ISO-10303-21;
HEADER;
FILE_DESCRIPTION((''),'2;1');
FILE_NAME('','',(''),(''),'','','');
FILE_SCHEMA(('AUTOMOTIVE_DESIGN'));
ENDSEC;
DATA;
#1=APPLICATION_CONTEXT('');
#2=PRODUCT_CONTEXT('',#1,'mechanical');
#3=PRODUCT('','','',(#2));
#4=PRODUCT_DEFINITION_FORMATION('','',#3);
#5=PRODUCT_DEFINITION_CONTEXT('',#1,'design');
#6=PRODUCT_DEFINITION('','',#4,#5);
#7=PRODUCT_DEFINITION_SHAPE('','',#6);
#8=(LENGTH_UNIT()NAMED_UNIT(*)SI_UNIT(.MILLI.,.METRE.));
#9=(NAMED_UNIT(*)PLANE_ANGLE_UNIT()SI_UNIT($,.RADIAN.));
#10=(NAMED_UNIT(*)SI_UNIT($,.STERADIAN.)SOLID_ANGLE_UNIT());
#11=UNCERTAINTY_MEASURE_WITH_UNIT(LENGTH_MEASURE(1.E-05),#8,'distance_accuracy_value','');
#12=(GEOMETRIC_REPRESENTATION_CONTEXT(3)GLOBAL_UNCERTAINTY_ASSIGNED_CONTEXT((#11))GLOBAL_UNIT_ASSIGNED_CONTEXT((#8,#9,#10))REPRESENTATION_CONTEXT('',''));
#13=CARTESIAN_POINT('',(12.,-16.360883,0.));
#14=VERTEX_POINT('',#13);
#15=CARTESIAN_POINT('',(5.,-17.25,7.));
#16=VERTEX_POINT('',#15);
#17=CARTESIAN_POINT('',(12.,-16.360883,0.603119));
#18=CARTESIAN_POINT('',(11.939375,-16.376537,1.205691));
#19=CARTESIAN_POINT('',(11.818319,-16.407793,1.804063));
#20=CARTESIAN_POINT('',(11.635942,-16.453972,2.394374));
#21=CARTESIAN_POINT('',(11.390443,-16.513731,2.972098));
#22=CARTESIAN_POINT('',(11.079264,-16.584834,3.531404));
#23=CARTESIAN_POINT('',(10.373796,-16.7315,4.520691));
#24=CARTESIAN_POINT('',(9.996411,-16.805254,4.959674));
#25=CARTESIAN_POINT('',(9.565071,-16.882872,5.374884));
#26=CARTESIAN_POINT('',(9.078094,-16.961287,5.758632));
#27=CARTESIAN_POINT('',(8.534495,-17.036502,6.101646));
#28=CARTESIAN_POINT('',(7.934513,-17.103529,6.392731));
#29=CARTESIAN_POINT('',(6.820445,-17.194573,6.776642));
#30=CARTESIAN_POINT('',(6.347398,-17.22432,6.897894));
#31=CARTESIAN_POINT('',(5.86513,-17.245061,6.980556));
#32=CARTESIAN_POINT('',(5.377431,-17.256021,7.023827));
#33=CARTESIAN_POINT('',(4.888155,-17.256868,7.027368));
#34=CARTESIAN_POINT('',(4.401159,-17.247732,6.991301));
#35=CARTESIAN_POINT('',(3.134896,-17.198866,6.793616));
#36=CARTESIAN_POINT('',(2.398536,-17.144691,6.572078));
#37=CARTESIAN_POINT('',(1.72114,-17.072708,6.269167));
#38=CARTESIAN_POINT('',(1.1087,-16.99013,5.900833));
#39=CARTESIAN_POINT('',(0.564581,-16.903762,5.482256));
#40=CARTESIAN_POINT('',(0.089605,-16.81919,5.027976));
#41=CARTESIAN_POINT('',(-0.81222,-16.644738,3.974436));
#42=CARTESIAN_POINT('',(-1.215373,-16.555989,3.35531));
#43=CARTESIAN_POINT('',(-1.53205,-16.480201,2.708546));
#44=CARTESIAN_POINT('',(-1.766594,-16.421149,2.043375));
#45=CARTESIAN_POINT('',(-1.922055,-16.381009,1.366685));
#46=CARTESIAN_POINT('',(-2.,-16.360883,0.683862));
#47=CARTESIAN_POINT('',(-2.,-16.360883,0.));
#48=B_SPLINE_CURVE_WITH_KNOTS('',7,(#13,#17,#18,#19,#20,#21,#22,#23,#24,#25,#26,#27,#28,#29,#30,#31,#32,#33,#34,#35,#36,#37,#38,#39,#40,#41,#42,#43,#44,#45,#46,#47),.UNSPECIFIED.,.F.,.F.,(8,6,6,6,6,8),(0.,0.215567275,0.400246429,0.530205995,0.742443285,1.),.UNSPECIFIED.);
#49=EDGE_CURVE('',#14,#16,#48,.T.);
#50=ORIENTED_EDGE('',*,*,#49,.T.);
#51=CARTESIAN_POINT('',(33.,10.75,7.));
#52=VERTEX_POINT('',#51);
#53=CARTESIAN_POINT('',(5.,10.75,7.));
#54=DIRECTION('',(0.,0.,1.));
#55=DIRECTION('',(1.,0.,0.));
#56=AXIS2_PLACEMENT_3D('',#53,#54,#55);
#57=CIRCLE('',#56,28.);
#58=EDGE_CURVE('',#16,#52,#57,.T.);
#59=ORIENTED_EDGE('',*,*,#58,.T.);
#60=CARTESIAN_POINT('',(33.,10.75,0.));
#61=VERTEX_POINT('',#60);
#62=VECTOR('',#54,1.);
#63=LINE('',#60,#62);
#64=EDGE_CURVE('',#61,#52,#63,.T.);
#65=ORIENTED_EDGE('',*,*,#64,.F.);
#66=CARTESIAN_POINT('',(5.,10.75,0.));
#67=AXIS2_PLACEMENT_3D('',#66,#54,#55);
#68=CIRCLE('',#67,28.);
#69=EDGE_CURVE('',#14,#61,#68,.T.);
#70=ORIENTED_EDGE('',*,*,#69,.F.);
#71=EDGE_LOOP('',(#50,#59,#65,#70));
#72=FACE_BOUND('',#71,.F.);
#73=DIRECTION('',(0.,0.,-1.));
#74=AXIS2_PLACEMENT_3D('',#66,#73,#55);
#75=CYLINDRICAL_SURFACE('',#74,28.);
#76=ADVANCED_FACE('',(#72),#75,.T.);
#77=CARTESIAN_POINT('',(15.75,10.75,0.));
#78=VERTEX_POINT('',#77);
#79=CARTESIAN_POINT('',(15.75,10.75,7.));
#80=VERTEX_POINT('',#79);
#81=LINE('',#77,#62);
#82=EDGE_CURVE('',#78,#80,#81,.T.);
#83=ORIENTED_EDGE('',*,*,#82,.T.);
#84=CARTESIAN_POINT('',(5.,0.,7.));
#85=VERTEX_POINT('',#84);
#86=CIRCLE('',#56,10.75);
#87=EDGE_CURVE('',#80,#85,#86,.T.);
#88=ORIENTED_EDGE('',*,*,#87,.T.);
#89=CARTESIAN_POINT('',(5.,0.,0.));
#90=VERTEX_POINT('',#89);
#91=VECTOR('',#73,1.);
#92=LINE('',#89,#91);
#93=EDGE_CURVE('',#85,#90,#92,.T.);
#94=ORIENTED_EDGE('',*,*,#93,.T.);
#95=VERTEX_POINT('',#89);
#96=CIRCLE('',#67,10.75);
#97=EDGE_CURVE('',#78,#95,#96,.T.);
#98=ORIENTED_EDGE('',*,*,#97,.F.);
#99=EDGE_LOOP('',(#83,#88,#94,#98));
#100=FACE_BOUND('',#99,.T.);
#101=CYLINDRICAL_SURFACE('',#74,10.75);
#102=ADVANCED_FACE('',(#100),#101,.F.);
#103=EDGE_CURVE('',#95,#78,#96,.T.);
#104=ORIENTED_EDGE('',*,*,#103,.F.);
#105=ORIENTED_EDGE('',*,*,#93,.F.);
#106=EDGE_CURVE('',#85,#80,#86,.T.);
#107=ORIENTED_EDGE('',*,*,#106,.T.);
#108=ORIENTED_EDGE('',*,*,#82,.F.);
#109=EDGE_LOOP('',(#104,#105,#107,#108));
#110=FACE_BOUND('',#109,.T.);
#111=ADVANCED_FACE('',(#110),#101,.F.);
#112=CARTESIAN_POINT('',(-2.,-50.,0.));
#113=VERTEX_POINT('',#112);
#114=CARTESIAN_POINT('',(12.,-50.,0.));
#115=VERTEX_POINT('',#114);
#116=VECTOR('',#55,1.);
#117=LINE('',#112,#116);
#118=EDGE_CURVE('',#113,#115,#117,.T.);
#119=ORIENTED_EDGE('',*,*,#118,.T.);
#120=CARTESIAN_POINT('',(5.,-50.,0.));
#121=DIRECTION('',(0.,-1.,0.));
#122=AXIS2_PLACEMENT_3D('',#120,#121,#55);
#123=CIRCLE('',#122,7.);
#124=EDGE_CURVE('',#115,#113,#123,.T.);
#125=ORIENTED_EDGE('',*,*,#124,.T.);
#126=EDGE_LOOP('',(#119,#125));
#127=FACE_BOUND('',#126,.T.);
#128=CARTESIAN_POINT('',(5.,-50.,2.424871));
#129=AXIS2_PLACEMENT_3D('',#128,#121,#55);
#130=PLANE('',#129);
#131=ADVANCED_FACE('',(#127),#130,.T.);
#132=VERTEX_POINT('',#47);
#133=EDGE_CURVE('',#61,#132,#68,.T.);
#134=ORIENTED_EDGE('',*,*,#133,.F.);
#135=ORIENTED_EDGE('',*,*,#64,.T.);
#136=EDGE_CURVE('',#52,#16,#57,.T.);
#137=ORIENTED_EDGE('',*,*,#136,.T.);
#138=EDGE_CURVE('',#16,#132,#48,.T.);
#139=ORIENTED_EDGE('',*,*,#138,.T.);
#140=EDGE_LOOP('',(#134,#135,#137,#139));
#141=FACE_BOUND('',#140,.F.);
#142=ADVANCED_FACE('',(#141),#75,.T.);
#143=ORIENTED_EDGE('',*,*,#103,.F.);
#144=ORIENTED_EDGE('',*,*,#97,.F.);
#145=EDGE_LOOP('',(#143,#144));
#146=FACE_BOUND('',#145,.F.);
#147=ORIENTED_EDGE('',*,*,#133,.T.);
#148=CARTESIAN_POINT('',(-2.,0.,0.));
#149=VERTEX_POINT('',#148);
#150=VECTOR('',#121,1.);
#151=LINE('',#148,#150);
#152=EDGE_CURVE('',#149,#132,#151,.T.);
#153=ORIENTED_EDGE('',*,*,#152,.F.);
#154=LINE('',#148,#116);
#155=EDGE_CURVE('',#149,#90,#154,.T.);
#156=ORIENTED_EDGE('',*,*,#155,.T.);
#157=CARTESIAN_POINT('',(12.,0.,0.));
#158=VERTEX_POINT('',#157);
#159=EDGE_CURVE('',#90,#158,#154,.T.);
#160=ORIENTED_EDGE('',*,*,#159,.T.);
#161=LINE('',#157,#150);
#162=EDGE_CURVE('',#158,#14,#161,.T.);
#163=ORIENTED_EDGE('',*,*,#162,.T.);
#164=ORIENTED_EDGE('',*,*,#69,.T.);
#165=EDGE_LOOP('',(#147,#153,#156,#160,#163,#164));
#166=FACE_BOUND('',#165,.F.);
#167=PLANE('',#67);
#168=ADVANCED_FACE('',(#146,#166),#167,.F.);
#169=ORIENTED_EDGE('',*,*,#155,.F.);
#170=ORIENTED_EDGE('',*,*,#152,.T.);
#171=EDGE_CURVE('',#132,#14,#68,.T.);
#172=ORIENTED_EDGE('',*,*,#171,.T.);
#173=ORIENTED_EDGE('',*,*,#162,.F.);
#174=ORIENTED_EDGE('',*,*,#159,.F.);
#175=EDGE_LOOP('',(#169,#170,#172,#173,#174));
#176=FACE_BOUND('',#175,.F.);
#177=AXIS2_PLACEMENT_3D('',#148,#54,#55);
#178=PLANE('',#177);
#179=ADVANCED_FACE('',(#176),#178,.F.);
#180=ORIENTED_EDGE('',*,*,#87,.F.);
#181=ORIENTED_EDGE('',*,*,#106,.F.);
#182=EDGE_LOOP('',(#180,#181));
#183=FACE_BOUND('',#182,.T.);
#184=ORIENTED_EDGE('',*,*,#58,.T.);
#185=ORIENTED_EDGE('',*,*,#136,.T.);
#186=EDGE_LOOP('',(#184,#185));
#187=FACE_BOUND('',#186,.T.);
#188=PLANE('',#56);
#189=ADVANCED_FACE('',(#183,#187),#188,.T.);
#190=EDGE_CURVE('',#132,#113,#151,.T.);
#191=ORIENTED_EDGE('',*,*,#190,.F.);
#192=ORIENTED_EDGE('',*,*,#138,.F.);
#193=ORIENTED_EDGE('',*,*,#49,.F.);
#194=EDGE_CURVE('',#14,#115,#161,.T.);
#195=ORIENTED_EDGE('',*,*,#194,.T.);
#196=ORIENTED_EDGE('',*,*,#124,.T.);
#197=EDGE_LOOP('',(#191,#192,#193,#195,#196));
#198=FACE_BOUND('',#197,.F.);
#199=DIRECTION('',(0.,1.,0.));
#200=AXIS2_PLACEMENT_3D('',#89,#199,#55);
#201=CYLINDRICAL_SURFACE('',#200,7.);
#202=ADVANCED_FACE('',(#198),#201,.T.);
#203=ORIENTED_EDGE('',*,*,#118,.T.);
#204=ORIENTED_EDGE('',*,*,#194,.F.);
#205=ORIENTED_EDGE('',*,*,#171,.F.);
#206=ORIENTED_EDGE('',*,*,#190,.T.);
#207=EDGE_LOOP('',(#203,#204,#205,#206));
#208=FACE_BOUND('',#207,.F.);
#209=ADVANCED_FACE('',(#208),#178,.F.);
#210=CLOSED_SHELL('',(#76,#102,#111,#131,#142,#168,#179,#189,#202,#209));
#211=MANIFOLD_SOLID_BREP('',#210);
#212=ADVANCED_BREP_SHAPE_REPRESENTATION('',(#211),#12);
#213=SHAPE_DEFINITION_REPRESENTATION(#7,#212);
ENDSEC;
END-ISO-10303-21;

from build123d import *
from build123d import SkipClean  # not in build123d's __all__

# Parameters (mm, degrees)
F1_DEPTH = 50
F2_R     = 28
F2_R_2   = 10.75
F3_DEPTH = 7


with BuildPart() as f1:
    # F0 (on Front) → F1 (new body)
    with BuildSketch(Plane.XZ):
        with BuildLine():
            Line((-2, 0), (0, 0))
            Line((0, 0), (10, 0))
            Line((10, 0), (12, 0))
            ThreePointArc((12, 0), (5, 7), (-2, 0))
        make_face()
    extrude(amount=F1_DEPTH)

    # F2 (on Top) → F3 (join)
    with BuildSketch(Plane.XY):
        with Locations((5, 10.75)):
            Circle(F2_R)
        with Locations((5, 10.75)):
            Circle(F2_R_2, mode=Mode.SUBTRACT)
    with SkipClean():  # cleaning this boolean's faces spoils the solid; the shape is the same uncleaned
        extrude(amount=F3_DEPTH)


solid = f1.part
